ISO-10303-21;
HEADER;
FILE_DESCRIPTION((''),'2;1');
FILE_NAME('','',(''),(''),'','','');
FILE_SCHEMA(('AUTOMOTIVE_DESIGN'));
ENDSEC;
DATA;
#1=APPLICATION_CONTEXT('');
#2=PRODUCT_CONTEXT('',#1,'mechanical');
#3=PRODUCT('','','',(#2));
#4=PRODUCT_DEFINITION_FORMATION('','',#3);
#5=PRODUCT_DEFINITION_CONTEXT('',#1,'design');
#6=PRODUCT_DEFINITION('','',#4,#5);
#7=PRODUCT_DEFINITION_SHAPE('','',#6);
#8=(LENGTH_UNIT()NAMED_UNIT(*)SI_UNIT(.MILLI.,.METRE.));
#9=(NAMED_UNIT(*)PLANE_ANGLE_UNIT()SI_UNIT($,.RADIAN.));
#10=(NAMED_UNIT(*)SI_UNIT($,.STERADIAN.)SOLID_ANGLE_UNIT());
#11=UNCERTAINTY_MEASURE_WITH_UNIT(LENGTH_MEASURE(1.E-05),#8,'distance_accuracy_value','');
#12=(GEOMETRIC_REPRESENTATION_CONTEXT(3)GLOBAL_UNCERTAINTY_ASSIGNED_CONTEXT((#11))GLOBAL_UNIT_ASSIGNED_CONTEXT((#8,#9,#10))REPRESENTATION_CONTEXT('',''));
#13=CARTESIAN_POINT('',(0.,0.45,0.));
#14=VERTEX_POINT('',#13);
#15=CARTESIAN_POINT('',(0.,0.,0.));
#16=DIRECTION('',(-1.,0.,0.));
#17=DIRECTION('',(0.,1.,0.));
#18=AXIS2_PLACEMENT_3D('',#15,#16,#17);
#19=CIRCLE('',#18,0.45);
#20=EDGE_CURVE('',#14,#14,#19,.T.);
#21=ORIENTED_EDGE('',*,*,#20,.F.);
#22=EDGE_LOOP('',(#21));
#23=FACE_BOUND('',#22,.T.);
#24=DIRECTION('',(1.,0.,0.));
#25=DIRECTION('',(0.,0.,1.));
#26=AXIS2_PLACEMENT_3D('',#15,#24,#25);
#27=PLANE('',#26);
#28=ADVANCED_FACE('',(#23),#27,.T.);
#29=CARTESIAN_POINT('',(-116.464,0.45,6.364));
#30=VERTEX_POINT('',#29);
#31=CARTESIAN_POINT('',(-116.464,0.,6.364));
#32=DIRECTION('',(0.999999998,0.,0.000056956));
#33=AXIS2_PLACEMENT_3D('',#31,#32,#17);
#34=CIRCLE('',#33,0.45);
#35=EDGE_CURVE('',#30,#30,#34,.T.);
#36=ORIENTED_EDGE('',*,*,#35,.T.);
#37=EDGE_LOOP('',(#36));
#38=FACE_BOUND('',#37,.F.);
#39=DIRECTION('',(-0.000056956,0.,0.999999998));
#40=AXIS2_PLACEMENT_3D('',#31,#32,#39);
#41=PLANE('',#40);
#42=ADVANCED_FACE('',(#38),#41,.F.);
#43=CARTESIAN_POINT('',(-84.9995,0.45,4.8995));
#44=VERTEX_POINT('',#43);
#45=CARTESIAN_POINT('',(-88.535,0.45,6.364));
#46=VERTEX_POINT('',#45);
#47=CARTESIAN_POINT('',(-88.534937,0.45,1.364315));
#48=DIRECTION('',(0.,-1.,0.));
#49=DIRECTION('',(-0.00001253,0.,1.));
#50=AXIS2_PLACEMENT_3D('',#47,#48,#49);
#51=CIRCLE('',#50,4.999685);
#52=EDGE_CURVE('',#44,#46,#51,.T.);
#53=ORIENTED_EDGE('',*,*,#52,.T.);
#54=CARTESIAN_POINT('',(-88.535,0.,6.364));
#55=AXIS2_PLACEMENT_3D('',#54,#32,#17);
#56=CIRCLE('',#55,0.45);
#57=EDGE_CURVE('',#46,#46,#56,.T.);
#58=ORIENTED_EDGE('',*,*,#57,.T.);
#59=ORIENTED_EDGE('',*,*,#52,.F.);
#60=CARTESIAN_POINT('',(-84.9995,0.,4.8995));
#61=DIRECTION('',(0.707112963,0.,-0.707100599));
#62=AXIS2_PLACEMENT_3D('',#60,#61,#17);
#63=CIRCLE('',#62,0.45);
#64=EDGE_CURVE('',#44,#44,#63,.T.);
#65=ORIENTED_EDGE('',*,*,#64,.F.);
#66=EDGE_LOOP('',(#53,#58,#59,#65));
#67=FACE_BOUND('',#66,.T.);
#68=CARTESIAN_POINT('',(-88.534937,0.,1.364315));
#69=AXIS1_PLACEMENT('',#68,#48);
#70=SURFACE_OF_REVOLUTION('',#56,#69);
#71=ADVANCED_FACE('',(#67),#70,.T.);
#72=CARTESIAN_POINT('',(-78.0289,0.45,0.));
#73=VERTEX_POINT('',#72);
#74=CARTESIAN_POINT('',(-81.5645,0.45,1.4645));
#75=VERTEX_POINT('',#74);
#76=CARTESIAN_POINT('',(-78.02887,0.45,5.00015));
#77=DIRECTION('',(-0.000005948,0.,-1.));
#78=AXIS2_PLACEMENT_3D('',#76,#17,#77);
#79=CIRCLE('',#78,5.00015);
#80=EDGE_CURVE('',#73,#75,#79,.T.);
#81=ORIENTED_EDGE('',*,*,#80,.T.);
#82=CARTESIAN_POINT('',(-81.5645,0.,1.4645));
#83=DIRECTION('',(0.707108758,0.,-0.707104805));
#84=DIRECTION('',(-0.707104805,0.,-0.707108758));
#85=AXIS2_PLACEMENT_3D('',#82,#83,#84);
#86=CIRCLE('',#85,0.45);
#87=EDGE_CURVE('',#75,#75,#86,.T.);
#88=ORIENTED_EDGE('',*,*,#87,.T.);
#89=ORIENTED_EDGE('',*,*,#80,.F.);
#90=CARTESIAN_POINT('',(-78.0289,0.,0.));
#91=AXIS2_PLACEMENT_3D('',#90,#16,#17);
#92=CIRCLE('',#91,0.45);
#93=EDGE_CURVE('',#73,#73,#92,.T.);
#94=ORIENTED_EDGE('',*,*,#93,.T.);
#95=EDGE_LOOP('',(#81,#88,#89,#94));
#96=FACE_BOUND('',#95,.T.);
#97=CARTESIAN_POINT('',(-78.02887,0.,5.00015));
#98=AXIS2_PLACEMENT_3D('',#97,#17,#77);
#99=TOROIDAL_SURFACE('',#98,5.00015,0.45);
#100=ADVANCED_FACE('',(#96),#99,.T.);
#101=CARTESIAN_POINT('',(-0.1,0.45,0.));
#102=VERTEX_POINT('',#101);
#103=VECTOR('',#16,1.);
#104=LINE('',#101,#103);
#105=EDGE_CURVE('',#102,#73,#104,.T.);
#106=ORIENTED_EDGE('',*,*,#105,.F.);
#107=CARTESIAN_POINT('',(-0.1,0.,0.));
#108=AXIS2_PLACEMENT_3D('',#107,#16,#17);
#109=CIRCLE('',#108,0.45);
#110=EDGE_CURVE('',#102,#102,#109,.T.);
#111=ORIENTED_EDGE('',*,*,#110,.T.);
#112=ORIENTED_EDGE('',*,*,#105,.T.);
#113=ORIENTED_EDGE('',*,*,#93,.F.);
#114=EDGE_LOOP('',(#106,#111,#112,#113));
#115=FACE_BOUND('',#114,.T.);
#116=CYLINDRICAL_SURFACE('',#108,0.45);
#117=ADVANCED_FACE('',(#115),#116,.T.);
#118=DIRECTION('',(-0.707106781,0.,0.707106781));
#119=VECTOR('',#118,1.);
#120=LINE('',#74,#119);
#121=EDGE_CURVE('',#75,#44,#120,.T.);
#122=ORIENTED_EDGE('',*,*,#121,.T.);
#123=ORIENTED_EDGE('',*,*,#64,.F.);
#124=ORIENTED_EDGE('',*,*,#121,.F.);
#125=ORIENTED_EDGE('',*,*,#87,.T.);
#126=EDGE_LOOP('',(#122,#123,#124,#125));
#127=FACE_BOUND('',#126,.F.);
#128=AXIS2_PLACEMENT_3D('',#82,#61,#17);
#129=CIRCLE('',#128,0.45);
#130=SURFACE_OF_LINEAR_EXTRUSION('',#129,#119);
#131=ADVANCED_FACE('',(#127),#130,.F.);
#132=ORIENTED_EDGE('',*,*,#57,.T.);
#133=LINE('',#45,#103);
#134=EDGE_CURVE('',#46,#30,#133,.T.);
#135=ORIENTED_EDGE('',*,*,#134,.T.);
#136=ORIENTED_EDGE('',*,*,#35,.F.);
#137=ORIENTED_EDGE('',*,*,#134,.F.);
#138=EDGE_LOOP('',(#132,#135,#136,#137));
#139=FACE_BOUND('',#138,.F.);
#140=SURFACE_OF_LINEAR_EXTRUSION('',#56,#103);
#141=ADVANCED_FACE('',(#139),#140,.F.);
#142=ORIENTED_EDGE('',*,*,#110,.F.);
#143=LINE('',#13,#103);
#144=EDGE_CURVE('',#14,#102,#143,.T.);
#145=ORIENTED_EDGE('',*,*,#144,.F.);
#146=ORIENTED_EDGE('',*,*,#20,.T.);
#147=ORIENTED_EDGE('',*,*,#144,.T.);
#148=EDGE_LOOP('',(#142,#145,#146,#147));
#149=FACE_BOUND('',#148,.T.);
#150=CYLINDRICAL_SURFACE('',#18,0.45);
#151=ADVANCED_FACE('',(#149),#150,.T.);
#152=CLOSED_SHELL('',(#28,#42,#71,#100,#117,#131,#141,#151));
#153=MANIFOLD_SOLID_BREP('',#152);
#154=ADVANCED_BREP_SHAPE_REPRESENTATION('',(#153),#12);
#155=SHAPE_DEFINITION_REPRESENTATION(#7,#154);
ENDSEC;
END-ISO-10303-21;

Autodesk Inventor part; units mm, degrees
ref_plane "YZ Plane" through (0, 0, 0) normal (1, 0, 0) x (0, 1, 0)
ref_plane "XZ Plane" through (0, 0, 0) normal (0, 1, 0) x (-1, 0, 0)
ref_plane "XY Plane" through (0, 0, 0) normal (0, 0, 1) x (1, 0, 0)
sketch "Sketch1" plane through (0, 0, 0) normal (1, 0, 0) x (0, 1, 0)
  circle A0 centre (0, 0) radius 0.45
  dimension "d0" = 0.9
sketch "Sketch2" plane through (0, 0, 0) normal (0, 1, 0) x (-1, 0, 0)
  line L0 (0, 0) -> (0.1, 0)
  line L1 (0.1, 0) -> (78.0289, 0)
  line L2 (81.5645, 1.4645) -> (84.9995, 4.8995)
  line L3 (88.535, 6.364) -> (116.464, 6.364)
  arc A0 (88.535, 6.364) -> (84.9995, 4.8995) centre (88.535, 1.364) ccw
  arc A1 (78.0289, 0) -> (81.5645, 1.4645) centre (78.0289, 5) ccw
  point P0 (80.1, 0)
  point P1 (86.464, 6.364)
  dimension "d1" = 0.1
  dimension "d4" = 80
  dimension "d6" = 9
  dimension "d7" = 30
  dimension "d8" = 5
sweep "Sweep2" add profiles "Sketch1" path "Sketch2"
properties part number "cable medio"
